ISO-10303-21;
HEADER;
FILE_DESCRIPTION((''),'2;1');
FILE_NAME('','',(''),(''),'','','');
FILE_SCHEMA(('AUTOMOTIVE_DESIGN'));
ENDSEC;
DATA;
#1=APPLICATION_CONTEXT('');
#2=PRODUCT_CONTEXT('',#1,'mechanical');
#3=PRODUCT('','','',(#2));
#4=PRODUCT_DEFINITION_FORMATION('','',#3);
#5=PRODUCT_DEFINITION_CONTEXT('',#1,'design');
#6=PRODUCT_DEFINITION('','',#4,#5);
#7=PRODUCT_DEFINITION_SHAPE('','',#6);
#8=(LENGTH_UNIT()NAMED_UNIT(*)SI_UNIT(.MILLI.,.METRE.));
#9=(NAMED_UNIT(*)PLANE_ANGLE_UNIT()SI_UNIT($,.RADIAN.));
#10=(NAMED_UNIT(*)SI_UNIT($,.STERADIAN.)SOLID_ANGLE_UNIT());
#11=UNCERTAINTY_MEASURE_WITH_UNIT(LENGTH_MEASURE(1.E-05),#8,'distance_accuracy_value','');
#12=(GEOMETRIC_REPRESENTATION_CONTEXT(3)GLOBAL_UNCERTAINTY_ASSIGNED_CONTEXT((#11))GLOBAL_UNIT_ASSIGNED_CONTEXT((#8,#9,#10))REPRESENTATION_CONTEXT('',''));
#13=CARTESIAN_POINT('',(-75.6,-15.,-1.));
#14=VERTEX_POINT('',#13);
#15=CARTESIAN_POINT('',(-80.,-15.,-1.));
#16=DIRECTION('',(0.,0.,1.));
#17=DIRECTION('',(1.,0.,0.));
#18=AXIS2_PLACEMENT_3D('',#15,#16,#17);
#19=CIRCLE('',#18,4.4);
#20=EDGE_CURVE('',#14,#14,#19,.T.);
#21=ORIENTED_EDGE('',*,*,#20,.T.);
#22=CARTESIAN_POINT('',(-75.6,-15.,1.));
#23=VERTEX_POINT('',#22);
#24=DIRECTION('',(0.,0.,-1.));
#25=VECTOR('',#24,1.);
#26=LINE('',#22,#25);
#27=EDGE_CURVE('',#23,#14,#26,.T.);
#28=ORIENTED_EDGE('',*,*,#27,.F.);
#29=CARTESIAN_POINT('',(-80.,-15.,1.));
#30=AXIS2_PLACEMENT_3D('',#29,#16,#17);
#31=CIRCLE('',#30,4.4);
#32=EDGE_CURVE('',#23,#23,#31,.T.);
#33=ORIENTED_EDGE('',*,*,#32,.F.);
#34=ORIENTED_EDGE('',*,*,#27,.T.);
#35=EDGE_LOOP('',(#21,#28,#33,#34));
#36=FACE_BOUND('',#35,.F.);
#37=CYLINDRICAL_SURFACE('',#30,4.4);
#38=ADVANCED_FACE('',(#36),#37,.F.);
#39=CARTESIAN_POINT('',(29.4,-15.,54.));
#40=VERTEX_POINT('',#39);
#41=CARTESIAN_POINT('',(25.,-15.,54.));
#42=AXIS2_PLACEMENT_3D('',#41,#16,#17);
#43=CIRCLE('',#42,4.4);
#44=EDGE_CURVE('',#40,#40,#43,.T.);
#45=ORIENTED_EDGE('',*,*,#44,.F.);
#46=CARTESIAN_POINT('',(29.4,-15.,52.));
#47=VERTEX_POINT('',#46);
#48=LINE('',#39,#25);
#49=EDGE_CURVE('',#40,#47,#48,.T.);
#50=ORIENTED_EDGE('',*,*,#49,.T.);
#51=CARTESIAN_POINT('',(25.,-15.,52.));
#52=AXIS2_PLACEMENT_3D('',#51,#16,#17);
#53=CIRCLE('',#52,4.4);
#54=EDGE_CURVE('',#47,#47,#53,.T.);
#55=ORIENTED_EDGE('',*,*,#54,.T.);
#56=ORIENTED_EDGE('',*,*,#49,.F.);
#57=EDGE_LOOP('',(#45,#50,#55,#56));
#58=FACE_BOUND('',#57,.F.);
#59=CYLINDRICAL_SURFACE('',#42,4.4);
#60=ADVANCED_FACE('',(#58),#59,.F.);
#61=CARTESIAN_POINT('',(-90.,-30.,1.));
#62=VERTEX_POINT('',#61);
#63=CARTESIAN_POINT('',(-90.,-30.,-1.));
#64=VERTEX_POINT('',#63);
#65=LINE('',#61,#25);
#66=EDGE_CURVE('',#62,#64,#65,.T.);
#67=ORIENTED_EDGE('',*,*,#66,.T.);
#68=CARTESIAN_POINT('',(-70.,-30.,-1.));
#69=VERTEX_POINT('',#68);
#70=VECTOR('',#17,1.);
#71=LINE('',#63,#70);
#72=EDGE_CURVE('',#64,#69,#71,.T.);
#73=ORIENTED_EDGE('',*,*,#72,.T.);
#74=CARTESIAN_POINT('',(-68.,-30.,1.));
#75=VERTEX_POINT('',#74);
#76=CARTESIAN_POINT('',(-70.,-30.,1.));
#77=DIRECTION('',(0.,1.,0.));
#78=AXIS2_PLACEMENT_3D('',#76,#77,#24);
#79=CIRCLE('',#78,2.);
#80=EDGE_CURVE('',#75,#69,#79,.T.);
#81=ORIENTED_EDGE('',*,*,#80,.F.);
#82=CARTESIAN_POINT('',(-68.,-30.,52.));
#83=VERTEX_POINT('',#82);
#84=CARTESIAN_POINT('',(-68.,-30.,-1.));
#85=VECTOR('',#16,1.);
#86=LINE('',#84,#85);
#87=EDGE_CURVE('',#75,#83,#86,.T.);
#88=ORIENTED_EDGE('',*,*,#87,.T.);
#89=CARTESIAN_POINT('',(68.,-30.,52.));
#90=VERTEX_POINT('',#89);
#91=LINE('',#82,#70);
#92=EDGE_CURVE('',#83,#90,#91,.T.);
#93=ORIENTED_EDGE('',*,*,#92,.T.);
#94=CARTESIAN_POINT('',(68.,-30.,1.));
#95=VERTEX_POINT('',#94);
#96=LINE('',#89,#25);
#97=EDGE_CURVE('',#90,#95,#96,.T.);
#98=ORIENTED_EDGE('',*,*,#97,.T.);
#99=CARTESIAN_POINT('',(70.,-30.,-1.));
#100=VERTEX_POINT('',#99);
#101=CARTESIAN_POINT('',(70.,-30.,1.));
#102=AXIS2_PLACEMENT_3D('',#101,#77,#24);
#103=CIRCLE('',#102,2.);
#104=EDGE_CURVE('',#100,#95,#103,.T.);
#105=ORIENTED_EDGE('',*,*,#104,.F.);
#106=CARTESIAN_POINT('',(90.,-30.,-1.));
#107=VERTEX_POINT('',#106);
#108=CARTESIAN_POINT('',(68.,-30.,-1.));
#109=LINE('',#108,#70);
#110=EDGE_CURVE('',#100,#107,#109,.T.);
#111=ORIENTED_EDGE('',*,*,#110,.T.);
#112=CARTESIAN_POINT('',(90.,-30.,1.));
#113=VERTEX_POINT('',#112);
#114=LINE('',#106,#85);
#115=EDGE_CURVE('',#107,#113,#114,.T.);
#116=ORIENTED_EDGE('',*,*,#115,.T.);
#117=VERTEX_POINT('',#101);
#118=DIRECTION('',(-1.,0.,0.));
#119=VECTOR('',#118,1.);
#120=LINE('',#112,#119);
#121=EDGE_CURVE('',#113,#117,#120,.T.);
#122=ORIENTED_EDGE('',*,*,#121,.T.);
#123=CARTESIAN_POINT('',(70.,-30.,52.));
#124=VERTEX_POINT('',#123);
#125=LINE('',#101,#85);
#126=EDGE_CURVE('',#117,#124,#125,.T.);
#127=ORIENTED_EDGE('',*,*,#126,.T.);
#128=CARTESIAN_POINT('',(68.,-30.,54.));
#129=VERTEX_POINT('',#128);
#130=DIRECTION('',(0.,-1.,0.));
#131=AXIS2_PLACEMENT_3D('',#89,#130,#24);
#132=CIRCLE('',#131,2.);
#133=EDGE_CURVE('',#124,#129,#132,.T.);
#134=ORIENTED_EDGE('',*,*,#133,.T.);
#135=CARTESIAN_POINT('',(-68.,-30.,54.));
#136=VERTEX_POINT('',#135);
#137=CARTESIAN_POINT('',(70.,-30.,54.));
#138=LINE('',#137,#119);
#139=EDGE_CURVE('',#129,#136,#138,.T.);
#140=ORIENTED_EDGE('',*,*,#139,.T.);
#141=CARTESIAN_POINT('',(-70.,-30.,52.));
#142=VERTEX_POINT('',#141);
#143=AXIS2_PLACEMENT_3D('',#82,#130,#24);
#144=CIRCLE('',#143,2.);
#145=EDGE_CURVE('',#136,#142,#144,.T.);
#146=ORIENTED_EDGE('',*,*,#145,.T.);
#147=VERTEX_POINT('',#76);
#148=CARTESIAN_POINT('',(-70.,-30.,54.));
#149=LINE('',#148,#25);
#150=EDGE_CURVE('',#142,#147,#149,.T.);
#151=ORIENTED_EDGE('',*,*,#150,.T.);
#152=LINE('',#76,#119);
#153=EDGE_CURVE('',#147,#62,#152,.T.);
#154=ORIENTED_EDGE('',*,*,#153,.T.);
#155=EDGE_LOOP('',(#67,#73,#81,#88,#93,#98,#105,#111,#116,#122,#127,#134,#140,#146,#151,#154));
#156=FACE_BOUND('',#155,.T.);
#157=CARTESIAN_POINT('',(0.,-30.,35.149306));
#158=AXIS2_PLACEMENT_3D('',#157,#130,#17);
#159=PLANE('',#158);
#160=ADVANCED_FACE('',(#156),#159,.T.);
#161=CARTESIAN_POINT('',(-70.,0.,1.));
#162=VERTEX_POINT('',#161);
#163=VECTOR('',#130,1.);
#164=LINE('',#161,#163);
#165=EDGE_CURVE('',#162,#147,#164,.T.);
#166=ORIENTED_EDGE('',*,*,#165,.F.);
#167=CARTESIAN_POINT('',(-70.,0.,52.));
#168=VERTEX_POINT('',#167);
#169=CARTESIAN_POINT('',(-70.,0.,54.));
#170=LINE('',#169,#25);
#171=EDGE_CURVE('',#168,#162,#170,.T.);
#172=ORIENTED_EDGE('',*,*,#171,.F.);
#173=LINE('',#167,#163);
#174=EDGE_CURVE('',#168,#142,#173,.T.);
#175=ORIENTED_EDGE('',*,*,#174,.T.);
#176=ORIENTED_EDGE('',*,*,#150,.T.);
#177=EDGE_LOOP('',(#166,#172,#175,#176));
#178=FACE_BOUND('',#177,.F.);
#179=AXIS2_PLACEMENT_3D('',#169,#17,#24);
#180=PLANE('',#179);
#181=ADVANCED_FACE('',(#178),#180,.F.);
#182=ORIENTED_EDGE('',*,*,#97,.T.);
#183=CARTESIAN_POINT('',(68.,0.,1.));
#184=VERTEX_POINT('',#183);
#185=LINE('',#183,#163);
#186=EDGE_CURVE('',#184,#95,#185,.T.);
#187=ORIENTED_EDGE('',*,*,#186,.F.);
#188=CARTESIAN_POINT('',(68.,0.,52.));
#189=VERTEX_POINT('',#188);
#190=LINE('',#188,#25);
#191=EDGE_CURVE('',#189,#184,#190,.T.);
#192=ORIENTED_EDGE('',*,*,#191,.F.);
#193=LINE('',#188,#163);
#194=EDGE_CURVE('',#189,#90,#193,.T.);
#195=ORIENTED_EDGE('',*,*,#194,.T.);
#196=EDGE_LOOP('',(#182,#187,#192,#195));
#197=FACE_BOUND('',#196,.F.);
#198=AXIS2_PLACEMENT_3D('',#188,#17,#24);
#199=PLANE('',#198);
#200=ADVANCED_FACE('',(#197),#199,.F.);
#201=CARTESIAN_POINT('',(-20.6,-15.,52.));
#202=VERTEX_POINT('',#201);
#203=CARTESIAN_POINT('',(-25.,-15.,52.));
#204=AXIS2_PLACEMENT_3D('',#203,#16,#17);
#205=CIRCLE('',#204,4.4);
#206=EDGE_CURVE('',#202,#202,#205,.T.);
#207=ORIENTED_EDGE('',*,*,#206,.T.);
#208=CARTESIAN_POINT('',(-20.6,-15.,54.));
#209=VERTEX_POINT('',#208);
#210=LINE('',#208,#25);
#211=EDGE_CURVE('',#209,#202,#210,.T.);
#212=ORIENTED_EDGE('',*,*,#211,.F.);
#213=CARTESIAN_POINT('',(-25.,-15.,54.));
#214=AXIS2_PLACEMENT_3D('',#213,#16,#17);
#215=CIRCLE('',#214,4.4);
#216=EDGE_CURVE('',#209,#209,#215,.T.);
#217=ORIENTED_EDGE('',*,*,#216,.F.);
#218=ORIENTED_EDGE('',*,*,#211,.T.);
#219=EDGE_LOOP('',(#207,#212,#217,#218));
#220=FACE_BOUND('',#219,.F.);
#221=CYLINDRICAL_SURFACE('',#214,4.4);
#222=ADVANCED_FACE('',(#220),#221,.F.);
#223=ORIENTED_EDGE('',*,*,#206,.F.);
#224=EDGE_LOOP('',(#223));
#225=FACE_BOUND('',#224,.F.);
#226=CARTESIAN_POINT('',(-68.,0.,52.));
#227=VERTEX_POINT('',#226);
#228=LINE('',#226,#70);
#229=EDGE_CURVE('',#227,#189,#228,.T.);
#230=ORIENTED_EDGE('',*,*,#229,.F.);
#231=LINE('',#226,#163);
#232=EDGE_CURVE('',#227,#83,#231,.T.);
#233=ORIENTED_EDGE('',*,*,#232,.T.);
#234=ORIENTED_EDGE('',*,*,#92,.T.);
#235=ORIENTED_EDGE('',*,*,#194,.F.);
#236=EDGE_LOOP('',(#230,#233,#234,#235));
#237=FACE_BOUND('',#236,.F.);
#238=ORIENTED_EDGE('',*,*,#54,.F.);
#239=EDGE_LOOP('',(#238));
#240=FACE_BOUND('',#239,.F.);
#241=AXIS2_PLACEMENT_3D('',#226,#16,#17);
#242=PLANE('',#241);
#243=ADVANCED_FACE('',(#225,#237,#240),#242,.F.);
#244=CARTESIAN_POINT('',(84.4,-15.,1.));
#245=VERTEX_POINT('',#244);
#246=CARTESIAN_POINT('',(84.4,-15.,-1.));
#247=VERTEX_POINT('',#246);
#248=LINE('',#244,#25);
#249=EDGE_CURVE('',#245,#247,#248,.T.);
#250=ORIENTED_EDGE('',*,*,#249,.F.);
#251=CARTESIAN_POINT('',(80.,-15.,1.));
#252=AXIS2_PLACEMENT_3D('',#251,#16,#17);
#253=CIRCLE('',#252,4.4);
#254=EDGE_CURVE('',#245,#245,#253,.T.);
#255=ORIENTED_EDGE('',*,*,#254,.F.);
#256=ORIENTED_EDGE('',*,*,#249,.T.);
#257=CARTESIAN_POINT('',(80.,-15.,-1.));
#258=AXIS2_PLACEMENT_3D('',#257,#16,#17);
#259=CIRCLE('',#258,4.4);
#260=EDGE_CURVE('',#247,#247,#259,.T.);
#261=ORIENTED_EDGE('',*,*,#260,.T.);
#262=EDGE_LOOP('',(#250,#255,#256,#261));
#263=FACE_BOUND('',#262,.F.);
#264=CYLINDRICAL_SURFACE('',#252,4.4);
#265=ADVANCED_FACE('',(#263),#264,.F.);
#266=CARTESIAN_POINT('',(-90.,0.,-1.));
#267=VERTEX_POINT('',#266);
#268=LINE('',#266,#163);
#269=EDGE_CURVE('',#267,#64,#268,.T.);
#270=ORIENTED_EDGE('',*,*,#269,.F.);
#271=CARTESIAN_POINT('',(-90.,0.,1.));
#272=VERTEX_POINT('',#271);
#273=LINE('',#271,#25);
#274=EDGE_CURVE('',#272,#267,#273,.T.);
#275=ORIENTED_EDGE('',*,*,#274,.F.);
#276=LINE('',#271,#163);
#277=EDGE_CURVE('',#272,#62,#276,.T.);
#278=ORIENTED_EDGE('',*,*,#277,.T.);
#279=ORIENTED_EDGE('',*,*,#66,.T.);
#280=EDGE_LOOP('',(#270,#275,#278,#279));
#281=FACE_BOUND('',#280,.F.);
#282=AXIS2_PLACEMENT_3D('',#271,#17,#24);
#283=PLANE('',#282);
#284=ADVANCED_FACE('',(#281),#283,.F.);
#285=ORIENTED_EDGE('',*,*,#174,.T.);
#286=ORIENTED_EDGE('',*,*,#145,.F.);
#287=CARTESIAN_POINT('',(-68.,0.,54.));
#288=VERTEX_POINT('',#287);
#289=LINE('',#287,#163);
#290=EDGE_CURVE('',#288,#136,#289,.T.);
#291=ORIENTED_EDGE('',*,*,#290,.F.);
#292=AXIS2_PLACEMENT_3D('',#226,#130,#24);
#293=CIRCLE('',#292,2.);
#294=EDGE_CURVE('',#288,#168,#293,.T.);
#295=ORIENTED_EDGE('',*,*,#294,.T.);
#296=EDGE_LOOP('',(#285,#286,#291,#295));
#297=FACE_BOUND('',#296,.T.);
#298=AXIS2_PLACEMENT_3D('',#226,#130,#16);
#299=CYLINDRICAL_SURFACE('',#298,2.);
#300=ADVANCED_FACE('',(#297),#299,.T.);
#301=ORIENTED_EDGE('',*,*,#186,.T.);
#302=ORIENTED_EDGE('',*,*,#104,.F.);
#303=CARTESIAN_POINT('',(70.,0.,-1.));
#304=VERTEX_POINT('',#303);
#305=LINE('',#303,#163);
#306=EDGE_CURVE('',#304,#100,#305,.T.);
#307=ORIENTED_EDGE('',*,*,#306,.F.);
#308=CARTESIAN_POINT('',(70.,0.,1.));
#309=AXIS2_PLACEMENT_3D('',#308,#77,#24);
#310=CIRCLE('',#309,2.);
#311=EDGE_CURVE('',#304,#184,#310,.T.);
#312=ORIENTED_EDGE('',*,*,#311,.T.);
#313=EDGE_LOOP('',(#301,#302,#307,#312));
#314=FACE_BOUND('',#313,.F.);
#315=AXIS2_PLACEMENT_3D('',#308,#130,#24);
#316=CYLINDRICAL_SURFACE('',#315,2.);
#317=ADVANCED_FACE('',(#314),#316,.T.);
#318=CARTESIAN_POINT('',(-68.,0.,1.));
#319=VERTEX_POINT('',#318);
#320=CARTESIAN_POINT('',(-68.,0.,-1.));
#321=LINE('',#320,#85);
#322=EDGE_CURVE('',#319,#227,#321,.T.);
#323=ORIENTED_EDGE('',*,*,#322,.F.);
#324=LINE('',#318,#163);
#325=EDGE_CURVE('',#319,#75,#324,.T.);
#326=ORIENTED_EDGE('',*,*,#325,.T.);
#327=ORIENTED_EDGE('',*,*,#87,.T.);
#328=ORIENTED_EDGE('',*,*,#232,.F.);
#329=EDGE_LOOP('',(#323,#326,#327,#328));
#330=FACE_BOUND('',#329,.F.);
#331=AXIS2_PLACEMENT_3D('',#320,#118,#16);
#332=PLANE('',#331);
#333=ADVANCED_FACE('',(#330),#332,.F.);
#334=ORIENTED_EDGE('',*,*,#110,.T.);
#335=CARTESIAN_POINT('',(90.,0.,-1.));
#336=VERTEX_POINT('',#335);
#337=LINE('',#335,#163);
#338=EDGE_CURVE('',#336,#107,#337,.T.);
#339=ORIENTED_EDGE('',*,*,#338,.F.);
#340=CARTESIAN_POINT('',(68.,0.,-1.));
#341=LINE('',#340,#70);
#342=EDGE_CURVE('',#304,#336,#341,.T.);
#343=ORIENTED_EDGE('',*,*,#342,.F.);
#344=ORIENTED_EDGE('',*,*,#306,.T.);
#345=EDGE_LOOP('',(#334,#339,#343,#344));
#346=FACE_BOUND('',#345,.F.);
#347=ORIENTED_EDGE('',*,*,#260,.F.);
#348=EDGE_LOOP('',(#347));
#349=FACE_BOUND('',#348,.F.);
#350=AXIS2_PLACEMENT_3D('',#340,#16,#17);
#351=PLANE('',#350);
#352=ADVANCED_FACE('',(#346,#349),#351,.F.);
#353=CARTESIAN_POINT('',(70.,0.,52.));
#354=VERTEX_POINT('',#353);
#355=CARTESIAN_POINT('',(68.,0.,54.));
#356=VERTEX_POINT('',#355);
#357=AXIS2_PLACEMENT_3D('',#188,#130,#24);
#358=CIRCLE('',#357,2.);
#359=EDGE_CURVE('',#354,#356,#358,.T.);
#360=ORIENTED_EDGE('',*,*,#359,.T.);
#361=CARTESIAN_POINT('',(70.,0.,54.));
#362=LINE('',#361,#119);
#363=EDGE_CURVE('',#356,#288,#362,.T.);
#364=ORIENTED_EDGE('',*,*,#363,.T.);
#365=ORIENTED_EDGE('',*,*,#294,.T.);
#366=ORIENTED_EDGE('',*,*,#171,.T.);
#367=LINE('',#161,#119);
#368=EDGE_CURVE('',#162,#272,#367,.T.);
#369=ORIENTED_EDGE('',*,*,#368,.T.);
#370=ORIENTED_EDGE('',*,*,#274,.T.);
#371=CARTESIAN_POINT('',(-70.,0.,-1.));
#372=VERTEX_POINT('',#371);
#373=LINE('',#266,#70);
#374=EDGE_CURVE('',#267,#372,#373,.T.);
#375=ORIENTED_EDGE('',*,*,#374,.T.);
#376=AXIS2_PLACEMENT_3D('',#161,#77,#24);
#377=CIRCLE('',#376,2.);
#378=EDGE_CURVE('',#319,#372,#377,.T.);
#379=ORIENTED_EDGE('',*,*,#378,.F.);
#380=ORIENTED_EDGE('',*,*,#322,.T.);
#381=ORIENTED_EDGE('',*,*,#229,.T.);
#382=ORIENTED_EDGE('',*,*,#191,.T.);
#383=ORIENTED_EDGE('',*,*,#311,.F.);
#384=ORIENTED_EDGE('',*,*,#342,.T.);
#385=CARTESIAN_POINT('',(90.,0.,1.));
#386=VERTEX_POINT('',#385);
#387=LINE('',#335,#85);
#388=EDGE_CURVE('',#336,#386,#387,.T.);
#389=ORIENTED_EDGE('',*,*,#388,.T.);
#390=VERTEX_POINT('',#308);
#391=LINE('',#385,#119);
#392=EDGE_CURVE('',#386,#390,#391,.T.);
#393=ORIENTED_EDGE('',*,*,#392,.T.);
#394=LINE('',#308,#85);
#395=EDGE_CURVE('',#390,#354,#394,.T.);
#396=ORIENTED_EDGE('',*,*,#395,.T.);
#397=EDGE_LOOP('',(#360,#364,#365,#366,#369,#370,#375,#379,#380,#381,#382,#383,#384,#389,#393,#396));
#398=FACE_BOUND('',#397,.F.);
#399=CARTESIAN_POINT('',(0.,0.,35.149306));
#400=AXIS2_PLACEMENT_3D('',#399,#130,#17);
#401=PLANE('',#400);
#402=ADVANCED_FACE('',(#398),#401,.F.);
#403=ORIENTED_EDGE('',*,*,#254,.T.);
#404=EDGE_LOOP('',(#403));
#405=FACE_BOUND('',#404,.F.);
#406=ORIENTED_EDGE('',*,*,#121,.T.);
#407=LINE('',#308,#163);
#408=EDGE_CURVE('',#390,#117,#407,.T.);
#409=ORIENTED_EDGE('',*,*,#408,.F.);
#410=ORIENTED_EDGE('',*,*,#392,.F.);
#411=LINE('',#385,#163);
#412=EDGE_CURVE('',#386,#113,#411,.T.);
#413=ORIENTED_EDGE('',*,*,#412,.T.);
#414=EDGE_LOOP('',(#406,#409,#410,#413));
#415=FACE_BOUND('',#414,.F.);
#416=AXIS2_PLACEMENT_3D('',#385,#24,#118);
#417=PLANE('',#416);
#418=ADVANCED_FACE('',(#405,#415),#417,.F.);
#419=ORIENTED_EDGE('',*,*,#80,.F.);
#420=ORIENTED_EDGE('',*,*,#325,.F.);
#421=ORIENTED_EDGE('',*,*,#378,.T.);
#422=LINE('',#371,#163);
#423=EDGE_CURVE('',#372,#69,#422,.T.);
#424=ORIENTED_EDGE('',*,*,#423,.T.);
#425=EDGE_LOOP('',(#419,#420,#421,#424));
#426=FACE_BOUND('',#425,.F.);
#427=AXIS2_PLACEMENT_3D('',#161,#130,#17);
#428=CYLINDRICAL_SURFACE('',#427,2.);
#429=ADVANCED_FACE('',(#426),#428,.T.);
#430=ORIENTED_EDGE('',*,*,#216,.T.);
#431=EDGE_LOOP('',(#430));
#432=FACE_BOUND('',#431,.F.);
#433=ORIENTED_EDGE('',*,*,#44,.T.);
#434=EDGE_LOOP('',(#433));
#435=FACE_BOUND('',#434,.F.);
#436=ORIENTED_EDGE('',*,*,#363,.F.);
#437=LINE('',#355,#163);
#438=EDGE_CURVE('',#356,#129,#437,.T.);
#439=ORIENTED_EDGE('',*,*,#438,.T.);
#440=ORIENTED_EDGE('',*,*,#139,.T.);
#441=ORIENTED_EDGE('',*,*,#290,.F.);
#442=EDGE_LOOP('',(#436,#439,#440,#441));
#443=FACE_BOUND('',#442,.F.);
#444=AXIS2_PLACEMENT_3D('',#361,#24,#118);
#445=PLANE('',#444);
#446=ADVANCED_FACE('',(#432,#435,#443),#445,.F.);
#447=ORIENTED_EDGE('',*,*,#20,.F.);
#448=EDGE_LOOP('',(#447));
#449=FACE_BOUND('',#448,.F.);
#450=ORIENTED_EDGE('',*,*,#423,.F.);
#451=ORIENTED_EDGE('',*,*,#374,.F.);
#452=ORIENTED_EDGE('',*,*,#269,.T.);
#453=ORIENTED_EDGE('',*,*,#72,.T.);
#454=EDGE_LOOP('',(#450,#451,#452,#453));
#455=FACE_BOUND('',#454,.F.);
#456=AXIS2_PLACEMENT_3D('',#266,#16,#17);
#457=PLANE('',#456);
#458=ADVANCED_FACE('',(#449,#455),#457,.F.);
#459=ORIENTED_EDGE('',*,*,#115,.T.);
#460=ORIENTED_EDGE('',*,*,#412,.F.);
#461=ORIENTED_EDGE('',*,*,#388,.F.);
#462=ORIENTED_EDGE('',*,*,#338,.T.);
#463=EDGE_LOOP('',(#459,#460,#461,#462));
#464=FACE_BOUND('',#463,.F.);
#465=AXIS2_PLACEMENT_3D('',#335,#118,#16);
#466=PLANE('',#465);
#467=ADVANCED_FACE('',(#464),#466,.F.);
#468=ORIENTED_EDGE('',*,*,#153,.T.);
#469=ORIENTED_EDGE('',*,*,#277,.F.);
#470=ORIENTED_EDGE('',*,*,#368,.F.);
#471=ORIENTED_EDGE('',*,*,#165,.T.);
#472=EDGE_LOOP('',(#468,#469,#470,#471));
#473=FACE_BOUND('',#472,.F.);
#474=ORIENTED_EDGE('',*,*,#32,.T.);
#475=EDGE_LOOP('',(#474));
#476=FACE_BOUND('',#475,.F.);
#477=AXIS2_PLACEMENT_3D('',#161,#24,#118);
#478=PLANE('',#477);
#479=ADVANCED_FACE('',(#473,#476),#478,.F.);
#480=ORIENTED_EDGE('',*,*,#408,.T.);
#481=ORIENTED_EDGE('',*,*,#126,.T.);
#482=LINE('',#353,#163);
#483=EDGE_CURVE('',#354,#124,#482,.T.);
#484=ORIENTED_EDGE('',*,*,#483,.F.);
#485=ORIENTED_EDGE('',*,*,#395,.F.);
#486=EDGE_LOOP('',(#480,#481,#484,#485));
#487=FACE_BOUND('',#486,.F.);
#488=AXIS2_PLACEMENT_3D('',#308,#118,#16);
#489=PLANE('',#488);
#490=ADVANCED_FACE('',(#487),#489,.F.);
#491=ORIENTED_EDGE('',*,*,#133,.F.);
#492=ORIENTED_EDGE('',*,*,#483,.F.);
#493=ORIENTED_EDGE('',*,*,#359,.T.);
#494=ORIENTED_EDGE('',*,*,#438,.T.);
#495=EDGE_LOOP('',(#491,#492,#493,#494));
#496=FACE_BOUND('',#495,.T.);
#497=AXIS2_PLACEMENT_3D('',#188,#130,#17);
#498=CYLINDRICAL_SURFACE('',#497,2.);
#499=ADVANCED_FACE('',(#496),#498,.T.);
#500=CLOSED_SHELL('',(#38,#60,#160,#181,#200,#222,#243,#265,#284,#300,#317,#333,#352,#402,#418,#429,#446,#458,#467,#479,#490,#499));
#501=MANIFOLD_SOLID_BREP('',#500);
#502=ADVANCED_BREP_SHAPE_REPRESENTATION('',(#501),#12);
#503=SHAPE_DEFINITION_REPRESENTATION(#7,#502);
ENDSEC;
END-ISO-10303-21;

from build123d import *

# Parameters (mm, degrees)
F1_DEPTH = 30
F2_R     = 4.4
F3_R     = 4.4
F4_DEPTH = 25
F5_R     = 2
F6_R     = 2


# Not quite as in the source:
# - a feature names something its author has since deleted; it is built from what else it names


with BuildPart() as f1:
    # F0 (on Front) → F1 (new body)
    with BuildSketch(Plane.XZ):
        Polygon((90, -1), (90, 1), (70, 1), (70, 54), (-70, 54), (-70, 1), (-90, 1), (-90, -1), (-68, -1), (-68, 52), (68, 52), (68, -1), align=None)
    extrude(amount=F1_DEPTH)

    # F2 (on face) + F3 (on face) → F4 (cut)
    with BuildSketch(Plane.XY.offset(1)):
        with Locations((-80, -15)):
            Circle(F2_R)
        with Locations((80, -15)):
            Circle(F2_R)
    with BuildSketch(Plane.XY.offset(54)):
        with Locations((-25, -15)):
            Circle(F3_R)
        with Locations((25, -15)):
            Circle(F3_R)
    extrude(amount=-F4_DEPTH, mode=Mode.SUBTRACT)

    # F5
    f5_edges = [f1.edges().sort_by_distance(p)[0] for p in [
        (-70, -15, 54),
        (70, -15, 54),
    ]]
    fillet(f5_edges, radius=F5_R)

    # F6
    f6_edges = [f1.edges().sort_by_distance(p)[0] for p in [
        (68, -15, -1),
        (-68, -15, -1),
    ]]
    fillet(f6_edges, radius=F6_R)


solid = f1.part
